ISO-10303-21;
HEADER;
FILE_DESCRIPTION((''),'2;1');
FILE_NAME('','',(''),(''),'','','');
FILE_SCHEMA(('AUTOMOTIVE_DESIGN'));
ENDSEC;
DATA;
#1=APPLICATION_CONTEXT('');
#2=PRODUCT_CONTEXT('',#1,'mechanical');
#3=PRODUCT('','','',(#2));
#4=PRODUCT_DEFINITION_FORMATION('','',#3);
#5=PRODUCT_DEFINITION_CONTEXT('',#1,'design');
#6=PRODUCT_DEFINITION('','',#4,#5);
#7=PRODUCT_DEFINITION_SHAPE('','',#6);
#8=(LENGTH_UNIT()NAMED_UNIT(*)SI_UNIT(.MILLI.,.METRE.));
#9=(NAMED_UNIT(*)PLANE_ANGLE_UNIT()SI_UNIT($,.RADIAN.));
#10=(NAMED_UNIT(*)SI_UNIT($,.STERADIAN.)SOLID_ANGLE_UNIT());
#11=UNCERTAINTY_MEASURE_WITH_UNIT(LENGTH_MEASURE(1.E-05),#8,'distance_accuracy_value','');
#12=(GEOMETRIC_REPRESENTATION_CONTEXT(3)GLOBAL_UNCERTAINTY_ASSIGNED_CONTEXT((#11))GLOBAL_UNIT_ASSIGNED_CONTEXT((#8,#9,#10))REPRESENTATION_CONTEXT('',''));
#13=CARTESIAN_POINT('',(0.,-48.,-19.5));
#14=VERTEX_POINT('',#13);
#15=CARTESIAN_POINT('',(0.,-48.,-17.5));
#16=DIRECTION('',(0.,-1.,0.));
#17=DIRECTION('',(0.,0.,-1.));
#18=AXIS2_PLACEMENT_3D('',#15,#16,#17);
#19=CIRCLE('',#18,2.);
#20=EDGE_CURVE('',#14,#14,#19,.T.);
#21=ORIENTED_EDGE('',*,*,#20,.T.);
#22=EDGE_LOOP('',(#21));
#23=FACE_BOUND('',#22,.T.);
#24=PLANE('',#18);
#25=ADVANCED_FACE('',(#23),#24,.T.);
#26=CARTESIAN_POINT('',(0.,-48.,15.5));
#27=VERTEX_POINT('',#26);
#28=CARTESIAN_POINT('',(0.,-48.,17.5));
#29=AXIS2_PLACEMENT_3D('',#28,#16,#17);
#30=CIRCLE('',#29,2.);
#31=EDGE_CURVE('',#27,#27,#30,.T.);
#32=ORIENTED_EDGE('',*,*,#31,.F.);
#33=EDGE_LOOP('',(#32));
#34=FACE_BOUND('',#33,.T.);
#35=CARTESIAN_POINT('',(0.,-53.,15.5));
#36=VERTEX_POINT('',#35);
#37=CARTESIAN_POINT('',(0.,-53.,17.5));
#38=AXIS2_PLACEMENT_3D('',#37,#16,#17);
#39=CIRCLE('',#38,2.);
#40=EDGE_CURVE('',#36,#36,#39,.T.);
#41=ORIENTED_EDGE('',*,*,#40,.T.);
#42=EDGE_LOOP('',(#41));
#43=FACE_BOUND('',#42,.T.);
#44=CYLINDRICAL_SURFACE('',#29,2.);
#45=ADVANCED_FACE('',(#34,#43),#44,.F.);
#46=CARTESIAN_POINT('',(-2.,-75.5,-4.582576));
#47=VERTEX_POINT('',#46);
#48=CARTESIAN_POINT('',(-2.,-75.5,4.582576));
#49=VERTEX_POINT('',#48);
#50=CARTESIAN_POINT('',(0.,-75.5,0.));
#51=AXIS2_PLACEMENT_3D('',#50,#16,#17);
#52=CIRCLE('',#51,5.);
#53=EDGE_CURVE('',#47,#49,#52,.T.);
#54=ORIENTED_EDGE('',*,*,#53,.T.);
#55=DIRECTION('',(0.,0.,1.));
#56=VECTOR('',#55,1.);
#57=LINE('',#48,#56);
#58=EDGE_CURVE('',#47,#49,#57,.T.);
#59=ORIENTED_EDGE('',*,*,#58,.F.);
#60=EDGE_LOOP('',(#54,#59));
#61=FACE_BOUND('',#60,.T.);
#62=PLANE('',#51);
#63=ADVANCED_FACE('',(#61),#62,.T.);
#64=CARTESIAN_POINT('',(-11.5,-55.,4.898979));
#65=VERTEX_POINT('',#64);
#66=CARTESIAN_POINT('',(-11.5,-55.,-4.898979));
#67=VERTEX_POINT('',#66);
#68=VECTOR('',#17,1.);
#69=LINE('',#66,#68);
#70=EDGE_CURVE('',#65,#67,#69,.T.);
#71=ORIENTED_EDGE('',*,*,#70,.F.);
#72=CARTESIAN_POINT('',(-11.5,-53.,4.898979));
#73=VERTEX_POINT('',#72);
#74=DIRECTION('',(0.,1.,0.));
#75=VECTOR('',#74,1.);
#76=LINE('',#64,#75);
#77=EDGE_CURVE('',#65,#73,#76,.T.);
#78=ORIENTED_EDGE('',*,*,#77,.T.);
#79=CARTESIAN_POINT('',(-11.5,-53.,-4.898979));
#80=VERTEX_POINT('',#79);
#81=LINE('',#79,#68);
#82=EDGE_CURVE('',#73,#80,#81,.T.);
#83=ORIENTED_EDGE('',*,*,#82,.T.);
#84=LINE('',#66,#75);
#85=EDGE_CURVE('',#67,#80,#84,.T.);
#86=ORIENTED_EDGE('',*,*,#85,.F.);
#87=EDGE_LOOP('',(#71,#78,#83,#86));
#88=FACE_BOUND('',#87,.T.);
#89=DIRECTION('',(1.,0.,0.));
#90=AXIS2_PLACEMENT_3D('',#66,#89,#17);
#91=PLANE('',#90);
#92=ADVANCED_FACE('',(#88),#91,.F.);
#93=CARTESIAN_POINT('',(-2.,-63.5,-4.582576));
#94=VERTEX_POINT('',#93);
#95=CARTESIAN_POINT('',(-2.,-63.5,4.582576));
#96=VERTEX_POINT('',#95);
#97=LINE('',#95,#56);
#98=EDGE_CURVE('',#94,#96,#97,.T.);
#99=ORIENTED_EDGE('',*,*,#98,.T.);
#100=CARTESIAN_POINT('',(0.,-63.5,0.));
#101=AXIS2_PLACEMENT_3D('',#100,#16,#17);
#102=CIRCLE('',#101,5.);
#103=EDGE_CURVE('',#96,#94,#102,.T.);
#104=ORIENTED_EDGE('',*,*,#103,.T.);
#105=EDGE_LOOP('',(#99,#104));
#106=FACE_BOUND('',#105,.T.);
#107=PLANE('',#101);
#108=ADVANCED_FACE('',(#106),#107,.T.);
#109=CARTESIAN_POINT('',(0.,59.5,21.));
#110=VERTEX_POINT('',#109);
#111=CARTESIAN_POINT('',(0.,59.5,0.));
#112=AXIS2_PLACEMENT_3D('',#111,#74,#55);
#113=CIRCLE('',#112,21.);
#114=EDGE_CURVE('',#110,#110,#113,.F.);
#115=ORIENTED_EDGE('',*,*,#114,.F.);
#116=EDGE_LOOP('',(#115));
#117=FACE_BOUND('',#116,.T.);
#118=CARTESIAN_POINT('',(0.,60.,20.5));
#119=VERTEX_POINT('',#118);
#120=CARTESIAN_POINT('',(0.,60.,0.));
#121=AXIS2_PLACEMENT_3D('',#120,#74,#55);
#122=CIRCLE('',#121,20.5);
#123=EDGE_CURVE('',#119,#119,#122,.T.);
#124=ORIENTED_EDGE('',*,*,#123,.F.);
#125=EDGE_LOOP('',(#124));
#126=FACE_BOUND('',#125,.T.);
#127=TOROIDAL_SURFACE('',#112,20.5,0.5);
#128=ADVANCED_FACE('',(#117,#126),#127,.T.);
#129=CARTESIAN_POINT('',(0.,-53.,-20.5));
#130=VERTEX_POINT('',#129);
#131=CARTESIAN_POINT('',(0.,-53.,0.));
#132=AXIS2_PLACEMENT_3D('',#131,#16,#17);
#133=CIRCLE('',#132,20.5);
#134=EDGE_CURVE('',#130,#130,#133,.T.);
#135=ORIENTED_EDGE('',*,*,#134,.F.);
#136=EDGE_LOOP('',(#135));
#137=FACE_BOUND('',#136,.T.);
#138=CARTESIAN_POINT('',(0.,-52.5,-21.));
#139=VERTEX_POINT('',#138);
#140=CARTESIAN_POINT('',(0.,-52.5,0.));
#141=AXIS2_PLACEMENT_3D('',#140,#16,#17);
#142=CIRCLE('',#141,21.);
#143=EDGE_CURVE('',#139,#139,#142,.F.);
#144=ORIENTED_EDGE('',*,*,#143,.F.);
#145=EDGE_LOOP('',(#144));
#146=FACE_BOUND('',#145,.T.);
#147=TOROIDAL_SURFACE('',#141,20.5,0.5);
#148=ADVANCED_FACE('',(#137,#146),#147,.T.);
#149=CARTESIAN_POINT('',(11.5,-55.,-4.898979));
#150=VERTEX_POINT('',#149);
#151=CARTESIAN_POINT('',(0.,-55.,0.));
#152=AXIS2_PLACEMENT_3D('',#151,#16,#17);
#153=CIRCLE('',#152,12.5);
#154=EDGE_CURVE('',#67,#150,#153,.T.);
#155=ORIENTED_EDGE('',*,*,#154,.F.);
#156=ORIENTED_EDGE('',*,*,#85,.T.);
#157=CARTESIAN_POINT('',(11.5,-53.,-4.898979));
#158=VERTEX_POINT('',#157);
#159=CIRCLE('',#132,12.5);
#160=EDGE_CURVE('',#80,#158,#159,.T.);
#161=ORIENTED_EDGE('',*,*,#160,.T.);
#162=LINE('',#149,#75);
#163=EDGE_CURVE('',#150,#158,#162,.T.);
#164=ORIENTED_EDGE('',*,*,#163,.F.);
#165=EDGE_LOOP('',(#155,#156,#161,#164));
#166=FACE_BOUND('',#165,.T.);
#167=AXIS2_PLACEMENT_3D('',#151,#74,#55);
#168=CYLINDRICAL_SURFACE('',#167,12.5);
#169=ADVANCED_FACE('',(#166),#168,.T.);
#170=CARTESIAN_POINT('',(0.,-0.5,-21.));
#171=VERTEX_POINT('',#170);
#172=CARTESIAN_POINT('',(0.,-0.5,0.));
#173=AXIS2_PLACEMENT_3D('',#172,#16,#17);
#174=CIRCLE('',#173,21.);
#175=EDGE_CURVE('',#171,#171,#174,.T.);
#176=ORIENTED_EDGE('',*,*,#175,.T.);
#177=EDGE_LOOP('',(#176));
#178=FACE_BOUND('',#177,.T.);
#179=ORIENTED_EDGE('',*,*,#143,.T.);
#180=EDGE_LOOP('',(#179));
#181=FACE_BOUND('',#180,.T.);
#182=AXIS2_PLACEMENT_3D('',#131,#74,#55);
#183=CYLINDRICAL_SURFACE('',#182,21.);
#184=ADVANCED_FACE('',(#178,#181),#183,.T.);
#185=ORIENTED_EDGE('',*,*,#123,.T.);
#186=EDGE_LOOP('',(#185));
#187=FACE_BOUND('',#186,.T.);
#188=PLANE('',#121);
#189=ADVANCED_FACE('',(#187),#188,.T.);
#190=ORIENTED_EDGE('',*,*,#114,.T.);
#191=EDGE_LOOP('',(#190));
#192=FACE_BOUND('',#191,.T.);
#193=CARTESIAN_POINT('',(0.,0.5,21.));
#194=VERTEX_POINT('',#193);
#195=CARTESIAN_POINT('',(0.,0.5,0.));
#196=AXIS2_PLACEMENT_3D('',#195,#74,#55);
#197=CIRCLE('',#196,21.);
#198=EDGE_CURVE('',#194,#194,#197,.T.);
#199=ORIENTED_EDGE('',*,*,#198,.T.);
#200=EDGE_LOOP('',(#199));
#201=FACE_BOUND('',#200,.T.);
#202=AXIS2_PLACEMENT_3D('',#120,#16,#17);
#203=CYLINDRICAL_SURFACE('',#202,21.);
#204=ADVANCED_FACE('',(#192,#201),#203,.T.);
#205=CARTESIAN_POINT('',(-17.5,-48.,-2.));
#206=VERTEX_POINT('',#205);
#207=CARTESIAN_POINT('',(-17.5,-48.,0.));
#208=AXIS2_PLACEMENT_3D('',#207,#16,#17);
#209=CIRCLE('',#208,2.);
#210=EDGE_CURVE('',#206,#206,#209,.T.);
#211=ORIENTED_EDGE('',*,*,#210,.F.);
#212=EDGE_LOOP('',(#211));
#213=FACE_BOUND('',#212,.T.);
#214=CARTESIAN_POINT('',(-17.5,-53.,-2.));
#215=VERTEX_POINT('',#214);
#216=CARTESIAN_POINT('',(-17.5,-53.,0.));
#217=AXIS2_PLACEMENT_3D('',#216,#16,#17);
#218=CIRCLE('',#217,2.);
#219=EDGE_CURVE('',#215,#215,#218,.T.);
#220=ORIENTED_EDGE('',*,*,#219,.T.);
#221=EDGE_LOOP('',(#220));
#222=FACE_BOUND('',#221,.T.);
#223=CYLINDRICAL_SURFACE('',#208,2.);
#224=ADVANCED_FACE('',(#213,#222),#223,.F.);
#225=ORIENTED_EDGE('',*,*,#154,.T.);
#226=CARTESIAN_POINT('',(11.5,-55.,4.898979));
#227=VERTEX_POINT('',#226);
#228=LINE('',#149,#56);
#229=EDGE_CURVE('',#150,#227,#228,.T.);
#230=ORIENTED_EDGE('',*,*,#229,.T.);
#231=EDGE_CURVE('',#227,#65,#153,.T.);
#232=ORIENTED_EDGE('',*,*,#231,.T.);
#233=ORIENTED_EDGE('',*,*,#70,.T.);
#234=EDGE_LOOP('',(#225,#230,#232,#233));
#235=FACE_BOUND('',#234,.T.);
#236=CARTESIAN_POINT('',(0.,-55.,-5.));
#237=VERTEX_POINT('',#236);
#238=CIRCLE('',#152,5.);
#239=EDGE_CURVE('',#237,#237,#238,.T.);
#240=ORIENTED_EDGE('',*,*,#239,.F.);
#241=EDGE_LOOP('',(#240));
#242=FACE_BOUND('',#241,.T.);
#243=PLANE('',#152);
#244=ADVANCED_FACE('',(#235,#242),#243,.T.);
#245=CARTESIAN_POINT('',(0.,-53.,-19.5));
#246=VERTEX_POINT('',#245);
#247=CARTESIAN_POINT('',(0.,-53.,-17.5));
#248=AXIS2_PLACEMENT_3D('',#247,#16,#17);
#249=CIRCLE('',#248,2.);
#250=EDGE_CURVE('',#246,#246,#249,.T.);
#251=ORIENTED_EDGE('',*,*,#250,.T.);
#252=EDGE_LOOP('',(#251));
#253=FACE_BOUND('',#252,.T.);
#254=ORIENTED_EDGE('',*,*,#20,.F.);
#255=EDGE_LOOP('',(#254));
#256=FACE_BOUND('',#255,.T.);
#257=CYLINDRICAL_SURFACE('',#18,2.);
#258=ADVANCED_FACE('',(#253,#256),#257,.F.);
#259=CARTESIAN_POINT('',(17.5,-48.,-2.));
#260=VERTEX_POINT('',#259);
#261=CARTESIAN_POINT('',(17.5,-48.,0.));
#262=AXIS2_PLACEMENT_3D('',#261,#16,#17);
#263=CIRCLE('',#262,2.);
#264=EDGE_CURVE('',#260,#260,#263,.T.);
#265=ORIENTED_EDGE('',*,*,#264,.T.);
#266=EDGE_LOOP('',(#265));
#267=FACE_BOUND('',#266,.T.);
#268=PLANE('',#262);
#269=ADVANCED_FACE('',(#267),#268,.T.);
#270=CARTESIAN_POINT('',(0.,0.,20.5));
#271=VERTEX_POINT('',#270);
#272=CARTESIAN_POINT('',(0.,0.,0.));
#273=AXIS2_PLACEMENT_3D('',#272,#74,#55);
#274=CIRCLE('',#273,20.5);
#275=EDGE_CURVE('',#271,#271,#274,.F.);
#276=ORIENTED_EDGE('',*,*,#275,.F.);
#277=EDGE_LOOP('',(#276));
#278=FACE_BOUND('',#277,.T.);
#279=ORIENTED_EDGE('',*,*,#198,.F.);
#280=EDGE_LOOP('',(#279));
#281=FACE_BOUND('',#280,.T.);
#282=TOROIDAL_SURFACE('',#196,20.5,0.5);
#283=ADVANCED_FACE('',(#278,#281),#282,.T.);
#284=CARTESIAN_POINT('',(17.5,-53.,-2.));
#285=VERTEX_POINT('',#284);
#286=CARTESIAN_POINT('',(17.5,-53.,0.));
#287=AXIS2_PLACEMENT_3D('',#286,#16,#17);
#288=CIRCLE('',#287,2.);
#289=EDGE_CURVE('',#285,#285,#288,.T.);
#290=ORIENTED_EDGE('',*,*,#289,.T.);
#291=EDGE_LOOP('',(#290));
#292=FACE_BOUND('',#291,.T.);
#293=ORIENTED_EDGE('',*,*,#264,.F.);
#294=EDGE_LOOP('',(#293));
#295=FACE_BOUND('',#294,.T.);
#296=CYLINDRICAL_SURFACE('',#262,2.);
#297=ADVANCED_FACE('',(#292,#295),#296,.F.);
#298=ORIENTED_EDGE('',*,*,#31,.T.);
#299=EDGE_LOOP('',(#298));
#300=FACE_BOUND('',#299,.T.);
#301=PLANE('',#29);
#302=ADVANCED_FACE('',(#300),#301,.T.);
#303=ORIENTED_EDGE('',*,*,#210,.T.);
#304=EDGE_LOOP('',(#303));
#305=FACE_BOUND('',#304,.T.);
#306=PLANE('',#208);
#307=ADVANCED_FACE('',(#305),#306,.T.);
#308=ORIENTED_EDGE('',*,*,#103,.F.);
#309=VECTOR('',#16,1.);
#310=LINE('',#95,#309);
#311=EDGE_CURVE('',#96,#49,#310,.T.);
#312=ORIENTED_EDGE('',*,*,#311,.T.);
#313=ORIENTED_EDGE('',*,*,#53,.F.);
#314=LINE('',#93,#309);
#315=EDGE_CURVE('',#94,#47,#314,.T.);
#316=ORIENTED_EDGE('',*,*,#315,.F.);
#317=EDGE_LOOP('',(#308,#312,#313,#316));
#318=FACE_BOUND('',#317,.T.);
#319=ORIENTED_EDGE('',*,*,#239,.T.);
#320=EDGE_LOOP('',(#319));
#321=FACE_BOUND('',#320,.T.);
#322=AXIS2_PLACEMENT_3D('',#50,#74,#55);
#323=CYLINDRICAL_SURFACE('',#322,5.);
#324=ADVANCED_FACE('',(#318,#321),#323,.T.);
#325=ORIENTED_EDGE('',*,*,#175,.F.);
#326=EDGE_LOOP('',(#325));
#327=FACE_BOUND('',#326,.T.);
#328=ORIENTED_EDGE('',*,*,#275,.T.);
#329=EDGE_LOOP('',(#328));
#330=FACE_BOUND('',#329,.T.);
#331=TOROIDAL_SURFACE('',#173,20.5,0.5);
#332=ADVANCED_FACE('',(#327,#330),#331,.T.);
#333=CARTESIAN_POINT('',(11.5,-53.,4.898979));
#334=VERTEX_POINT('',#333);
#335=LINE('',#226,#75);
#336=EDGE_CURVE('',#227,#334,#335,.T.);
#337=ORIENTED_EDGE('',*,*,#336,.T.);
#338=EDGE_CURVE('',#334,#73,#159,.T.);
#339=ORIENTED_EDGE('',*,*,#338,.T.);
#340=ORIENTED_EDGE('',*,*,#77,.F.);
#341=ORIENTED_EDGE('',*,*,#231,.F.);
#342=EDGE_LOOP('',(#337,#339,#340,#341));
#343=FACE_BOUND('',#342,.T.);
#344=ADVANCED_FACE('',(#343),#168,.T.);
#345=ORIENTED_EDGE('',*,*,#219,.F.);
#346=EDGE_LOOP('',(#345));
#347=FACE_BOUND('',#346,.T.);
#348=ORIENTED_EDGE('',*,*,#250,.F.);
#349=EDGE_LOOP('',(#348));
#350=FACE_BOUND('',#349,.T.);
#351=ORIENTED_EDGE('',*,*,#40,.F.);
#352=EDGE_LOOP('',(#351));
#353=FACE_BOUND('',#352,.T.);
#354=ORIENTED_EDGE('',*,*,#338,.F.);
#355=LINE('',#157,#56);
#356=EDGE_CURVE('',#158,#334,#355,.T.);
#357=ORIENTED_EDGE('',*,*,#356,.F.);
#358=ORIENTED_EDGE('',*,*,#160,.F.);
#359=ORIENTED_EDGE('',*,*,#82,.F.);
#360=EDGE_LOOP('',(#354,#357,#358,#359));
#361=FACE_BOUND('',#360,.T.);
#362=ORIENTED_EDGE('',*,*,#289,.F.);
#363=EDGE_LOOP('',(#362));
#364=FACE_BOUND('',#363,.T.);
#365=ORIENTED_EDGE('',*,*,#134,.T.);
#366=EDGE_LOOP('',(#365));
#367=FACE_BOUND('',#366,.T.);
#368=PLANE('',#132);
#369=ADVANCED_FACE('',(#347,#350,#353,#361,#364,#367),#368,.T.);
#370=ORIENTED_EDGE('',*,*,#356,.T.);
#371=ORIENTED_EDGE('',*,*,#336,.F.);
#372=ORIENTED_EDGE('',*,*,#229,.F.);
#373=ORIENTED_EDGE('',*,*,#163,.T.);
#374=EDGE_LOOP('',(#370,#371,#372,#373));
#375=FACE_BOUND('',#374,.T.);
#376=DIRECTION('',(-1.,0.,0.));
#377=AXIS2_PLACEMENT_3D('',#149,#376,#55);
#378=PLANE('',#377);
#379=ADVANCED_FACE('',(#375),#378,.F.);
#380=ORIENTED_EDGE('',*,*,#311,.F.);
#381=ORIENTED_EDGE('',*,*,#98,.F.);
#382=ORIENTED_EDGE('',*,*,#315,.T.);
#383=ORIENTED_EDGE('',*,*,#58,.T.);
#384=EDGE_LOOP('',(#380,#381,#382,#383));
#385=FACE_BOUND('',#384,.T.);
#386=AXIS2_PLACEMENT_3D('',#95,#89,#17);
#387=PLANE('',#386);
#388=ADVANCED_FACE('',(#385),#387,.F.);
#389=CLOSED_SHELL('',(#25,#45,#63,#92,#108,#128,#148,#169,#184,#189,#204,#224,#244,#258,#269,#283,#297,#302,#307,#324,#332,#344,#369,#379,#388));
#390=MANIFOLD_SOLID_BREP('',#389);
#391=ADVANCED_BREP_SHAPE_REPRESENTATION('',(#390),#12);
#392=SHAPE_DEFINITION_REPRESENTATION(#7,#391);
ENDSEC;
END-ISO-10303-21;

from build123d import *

# Parameters (mm, degrees)
CROQUIS1_R              = 21
SALIENTE_EXTRUIR1_DEPTH = 60
REDONDEO1_R             = 0.5
SALIENTE_EXTRUIR2_START = 53
CROQUIS2_R              = 21
SALIENTE_EXTRUIR2_DEPTH = 53
REDONDEO2_R             = 0.5
SALIENTE_EXTRUIR3_DEPTH = 2
CROQUIS4_R              = 5
SALIENTE_EXTRUIR4_DEPTH = 20.5
CORTAR_EXTRUIR1_START   = -12
CORTAR_EXTRUIR1_DEPTH   = 12
CROQUIS6_R              = 2
CORTAR_EXTRUIR2_DEPTH   = 5


with BuildPart() as part:
    # Croquis1 → Saliente-Extruir1 (new body)
    with BuildSketch(Plane(origin=(0, 0, 0), x_dir=(1, 0, 0), z_dir=(0, 1, 0))):
        with Locations(Location((0, 0, 0), (0, 0, 270))):
            Circle(CROQUIS1_R)
    extrude(amount=SALIENTE_EXTRUIR1_DEPTH)

    # Redondeo1
    redondeo1_edges = [part.edges().sort_by_distance(p)[0] for p in [
        (0, 0, -21),
        (0, 60, -21),
    ]]
    fillet(redondeo1_edges, radius=REDONDEO1_R)

    # Croquis2 → Saliente-Extruir2 (add)
    with BuildSketch(Plane.XZ.offset(SALIENTE_EXTRUIR2_START)):
        with Locations(Location((0, 0, 0), (0, 0, 90))):
            Circle(CROQUIS2_R)
    extrude(amount=-SALIENTE_EXTRUIR2_DEPTH)

    # Redondeo2
    redondeo2_edges = [part.edges().sort_by_distance(p)[0] for p in [
        (0, 0, -21),
        (0, -53, -21),
    ]]
    fillet(redondeo2_edges, radius=REDONDEO2_R - 0.0001)  # a hair under: the kernel refuses the full size

    # Croquis3 → Saliente-Extruir3 (add)
    with BuildSketch(Plane.XZ.offset(53)):
        with BuildLine():
            Line((11.5, -4.898979486), (11.5, 4.898979486))
            ThreePointArc((11.5, 4.898979486), (0, 12.5), (-11.5, 4.898979486))
            Line((-11.5, 4.898979486), (-11.5, -4.898979486))
            ThreePointArc((-11.5, -4.898979486), (0, -12.5), (11.5, -4.898979486))
        make_face()
    extrude(amount=SALIENTE_EXTRUIR3_DEPTH)

    # Croquis4 → Saliente-Extruir4 (add)
    with BuildSketch(Plane.XZ.offset(55)):
        with Locations(Location((0, 0, 0), (0, 0, 270))):
            Circle(CROQUIS4_R)
    extrude(amount=SALIENTE_EXTRUIR4_DEPTH)

    # Croquis5 → Cortar-Extruir1 (cut)
    with BuildSketch(Plane.XZ.offset(75.5).offset(CORTAR_EXTRUIR1_START)):
        with BuildLine():
            Line((-2, 4.582575695), (-2, -4.582575695))
            ThreePointArc((-2, -4.582575695), (-5, 0), (-2, 4.582575695))
        make_face()
    extrude(amount=CORTAR_EXTRUIR1_DEPTH, mode=Mode.SUBTRACT)

    # Croquis6 → Cortar-Extruir2 (cut)
    with BuildSketch(Plane.XZ.offset(53)):
        with Locations(Location((-17.5, 0, 0), (0, 0, 270))):
            Circle(CROQUIS6_R)
        with Locations(Location((0, 17.5, 0), (0, 0, 270))):
            Circle(CROQUIS6_R)
        with Locations(Location((17.5, 0, 0), (0, 0, 270))):
            Circle(CROQUIS6_R)
        with Locations(Location((0, -17.5, 0), (0, 0, 270))):
            Circle(CROQUIS6_R)
    extrude(amount=-CORTAR_EXTRUIR2_DEPTH, mode=Mode.SUBTRACT)


solid = part.part
